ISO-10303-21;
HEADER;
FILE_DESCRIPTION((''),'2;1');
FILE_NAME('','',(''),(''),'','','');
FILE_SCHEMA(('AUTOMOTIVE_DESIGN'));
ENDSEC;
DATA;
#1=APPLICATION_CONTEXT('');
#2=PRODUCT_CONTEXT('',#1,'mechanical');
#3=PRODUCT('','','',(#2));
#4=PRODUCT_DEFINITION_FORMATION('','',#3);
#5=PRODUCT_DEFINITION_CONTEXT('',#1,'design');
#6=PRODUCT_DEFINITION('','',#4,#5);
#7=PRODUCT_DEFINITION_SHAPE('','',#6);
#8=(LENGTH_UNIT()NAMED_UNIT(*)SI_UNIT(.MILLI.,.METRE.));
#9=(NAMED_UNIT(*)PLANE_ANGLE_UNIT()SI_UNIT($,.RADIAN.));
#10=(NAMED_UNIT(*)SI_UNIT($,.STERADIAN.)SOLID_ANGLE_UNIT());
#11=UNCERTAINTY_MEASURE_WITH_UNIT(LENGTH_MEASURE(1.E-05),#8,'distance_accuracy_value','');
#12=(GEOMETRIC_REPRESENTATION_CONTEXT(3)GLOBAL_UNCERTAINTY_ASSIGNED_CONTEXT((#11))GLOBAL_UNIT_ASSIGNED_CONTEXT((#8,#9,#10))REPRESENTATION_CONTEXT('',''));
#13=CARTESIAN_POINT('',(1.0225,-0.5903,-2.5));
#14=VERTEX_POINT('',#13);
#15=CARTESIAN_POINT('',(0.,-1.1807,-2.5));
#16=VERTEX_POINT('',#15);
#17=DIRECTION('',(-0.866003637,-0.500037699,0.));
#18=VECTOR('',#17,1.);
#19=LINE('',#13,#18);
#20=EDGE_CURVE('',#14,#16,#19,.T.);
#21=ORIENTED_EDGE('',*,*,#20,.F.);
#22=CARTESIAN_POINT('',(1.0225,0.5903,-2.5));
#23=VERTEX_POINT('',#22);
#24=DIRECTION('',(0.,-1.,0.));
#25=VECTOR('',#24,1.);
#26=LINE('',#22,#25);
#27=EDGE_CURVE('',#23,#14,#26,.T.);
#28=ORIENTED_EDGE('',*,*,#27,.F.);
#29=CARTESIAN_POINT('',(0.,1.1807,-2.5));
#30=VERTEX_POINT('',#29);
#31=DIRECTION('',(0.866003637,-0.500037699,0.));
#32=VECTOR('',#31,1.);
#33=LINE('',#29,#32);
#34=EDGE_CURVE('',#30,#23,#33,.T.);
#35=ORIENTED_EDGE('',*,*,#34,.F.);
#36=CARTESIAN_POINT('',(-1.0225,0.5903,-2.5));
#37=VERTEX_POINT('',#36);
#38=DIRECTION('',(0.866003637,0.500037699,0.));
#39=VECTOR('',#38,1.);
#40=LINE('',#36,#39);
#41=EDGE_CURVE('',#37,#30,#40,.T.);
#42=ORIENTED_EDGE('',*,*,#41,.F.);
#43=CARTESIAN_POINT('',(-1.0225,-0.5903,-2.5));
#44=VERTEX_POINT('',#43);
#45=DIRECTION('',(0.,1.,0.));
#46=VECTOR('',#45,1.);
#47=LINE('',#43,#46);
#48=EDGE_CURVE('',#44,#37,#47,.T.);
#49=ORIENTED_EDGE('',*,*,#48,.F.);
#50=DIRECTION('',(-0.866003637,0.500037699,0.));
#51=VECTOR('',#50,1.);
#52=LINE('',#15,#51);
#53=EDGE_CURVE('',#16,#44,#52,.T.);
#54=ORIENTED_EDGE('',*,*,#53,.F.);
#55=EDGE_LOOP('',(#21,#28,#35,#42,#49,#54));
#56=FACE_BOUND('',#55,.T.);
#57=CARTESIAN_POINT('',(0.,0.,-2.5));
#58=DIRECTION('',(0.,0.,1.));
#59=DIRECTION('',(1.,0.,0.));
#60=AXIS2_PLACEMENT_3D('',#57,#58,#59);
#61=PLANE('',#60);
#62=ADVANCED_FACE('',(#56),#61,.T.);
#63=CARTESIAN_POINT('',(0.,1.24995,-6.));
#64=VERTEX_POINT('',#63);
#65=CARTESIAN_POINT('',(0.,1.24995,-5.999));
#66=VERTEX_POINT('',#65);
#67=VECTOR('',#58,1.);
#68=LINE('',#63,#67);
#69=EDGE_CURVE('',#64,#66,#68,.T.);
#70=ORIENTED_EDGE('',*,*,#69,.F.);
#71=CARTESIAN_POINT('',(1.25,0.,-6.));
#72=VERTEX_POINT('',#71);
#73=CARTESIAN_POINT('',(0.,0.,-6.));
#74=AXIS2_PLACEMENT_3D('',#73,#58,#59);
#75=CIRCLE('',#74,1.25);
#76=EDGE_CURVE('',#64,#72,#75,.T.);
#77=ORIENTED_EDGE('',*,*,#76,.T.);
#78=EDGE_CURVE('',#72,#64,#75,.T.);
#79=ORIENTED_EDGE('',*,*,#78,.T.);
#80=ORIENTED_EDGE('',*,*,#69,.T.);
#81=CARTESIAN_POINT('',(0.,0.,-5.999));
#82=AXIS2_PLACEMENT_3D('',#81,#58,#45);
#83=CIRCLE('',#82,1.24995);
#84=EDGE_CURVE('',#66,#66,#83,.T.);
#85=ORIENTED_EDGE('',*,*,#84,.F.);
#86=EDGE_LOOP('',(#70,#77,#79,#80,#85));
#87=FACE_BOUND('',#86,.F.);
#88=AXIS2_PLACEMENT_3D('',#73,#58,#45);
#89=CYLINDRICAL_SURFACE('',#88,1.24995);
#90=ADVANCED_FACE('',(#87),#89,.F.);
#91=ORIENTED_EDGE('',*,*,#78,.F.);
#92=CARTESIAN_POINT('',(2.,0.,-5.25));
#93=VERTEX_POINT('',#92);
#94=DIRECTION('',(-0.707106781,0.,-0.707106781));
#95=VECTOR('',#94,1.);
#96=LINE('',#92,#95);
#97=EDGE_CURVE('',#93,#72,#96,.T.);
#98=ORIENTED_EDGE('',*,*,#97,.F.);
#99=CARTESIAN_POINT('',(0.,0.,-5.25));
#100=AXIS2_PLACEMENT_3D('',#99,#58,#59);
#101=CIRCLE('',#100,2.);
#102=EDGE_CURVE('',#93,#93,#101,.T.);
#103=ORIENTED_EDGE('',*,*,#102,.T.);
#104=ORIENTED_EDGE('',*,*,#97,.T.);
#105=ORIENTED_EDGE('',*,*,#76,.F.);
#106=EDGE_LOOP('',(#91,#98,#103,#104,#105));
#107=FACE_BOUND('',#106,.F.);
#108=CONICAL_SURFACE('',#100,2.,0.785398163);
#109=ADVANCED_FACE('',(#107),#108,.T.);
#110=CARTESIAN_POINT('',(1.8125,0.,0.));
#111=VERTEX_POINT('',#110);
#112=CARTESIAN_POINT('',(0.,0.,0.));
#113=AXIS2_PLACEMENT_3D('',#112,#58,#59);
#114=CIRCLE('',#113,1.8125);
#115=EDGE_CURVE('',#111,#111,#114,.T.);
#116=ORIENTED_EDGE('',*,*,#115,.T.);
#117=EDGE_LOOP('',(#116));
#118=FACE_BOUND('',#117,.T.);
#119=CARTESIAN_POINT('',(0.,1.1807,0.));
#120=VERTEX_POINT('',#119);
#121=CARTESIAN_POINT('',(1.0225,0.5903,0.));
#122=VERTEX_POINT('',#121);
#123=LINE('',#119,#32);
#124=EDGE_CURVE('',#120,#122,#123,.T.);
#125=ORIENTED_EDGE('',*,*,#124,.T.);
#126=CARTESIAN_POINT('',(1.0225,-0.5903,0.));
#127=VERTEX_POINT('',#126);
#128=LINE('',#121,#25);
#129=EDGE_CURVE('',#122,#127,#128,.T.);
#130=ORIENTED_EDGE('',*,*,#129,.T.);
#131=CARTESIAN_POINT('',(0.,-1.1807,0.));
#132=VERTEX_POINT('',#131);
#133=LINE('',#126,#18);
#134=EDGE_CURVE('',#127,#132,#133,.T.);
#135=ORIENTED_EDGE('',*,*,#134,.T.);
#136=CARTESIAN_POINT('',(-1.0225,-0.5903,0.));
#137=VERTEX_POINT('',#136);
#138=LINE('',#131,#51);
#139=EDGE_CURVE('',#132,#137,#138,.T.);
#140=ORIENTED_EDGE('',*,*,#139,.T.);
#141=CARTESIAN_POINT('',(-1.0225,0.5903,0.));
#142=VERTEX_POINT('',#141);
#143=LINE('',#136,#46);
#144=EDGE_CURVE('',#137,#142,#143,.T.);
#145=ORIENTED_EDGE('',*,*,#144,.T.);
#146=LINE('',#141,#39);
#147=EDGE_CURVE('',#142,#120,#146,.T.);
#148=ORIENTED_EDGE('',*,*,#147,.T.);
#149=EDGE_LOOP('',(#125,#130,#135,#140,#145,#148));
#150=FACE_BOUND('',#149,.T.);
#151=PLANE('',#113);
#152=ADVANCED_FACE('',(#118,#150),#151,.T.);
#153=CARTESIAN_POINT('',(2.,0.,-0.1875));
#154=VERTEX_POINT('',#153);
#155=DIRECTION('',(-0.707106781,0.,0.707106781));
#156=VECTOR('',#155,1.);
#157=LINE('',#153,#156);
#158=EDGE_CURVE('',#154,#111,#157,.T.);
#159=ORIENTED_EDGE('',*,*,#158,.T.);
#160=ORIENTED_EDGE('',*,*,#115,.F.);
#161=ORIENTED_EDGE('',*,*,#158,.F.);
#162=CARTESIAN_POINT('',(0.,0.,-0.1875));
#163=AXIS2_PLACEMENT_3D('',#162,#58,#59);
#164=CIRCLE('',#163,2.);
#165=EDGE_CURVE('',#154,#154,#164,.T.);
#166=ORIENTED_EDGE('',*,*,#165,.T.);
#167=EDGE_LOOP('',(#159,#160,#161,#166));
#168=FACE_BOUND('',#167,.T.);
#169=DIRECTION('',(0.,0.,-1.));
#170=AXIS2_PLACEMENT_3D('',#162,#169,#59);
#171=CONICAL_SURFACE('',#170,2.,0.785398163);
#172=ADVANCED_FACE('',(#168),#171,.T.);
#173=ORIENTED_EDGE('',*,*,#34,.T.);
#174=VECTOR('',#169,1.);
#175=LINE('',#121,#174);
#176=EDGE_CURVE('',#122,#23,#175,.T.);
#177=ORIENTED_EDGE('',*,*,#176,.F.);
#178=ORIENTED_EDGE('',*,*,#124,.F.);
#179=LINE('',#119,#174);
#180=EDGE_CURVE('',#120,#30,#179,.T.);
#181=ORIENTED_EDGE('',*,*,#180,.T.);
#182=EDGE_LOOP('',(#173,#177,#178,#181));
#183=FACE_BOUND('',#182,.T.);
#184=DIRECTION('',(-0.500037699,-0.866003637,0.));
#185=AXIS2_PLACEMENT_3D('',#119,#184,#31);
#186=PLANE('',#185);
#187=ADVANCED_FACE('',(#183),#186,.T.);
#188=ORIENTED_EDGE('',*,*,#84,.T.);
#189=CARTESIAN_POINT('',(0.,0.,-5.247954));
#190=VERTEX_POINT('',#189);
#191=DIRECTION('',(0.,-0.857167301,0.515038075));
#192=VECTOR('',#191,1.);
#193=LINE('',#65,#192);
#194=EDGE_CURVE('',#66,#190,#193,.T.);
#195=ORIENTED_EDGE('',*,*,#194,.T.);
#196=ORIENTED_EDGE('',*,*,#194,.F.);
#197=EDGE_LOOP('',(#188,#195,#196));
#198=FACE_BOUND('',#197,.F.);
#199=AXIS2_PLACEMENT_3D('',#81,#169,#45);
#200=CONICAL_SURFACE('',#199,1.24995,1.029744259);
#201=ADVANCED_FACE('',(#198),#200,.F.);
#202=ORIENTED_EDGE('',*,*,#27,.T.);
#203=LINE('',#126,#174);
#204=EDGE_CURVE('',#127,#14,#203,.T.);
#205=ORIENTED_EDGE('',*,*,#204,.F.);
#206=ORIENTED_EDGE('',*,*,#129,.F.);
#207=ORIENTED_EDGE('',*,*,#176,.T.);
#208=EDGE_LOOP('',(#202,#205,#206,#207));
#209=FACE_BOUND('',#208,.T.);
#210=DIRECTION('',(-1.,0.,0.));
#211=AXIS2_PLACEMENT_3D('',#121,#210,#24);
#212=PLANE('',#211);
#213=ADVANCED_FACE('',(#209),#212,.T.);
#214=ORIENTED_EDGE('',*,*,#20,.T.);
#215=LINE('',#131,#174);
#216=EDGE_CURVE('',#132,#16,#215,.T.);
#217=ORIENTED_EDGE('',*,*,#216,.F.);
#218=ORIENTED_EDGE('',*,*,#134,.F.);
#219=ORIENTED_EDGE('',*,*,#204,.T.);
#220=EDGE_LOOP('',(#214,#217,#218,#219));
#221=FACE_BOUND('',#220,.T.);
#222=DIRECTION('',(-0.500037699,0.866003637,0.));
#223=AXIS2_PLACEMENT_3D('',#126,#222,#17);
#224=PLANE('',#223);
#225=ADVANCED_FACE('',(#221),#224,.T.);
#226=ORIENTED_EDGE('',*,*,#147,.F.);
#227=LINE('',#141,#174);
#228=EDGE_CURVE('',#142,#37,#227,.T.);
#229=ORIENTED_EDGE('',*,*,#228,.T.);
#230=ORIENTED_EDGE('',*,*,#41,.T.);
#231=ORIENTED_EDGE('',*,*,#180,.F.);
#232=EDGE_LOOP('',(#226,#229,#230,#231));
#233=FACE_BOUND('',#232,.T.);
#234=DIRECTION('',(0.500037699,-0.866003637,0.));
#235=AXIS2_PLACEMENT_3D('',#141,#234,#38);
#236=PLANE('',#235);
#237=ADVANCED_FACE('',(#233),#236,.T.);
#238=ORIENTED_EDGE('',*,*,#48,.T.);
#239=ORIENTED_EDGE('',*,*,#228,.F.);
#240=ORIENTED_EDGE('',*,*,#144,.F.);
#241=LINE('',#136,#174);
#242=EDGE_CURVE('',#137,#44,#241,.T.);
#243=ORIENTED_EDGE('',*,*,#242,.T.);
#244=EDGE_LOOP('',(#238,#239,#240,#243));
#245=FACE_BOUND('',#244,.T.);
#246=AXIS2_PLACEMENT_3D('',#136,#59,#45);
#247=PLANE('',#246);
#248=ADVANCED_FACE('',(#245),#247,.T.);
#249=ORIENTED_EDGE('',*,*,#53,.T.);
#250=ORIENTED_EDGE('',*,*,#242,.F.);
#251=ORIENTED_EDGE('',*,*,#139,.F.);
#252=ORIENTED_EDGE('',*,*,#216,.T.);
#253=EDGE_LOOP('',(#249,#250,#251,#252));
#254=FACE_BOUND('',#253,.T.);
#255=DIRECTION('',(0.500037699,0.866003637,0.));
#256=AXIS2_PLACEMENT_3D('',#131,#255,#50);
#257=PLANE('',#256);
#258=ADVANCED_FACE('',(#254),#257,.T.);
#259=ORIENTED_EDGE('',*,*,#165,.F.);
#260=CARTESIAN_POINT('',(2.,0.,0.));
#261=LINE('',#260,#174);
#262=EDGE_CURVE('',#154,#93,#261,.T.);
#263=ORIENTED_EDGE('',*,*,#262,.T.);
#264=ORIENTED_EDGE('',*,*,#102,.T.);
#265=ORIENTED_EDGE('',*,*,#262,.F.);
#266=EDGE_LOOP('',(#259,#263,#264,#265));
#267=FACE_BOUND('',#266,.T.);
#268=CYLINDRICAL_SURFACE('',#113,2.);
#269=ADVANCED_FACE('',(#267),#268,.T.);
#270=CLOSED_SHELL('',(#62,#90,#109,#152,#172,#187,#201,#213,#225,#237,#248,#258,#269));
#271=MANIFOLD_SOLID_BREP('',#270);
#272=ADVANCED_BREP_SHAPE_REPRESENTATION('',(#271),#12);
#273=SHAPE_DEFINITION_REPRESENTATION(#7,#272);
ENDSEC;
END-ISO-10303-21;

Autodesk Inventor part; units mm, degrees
ref_plane "YZ Plane" through (0, 0, 0) normal (1, 0, 0) x (0, 1, 0)
ref_plane "XZ Plane" through (0, 0, 0) normal (0, 1, 0) x (-1, 0, 0)
ref_plane "XY Plane" through (0, 0, 0) normal (0, 0, 1) x (1, 0, 0)
sketch "Sketch3" plane through (0, 0, 0) normal (0, 0, 1) x (1, 0, 0)
  circle A0 centre (0, 0) radius 2 projected
  line L0 (1.0225, 0.5903) -> (1.0225, -0.5903)
  line L1 (1.0225, -0.5903) -> (0, -1.1807)
  line L2 (0, -1.1807) -> (-1.0225, -0.5903)
  line L3 (-1.0225, -0.5903) -> (-1.0225, 0.5903)
  line L4 (-1.0225, 0.5903) -> (0, 1.1807)
  line L5 (0, 1.1807) -> (1.0225, 0.5903)
  line L6 (0, 0) -> (0, 1.1807) construction
  dimension "HexWidth" = 2.045
sketch "Sketch2" plane through (0, 0, 0) normal (0, 0, 1) x (1, 0, 0)
  circle A0 centre (0, 0) radius 2
  dimension "Diam" = 4
extrude "Extrusion2" add sketch "Sketch2" against normal blind 6
thread "Thread1" size "M4x0.7" class "6g" standard "ANSI Metric M Profile" full length
extrude "Extrusion3" cut sketch "Sketch3" against normal blind 2.5 contours L0 L1 L2 L3 L4 L5
chamfer "Chamfer2" distance 0.75 angle 45 1 edges at (-2, 0, -6)
chamfer "Chamfer3" distance 0.1875 angle 45 1 edges at (-2, 0, 0)
sketch "Sketch4" plane through (0, 0, -6) normal (0, 0, -1) x (-1, 0, 0)
  circle A0 centre (0, 0) radius 1.8125 projected
hole "Cup_Point_Hole1" at (0, 0, -6) direction (0, 0, 1) diameter 2.4999 depth 0.001 tip angle 118
equation "\"d8\" = -0.5 * CupPointDiam + 0.5 * Diam"
equation "\"d11\" = 0.25 * d8"
equation "\"CupPointDiam\" = 2.5"
properties part number "SCREW,SET,CUP POINT,M4X0.7X6MM" material "Steel, MS"
